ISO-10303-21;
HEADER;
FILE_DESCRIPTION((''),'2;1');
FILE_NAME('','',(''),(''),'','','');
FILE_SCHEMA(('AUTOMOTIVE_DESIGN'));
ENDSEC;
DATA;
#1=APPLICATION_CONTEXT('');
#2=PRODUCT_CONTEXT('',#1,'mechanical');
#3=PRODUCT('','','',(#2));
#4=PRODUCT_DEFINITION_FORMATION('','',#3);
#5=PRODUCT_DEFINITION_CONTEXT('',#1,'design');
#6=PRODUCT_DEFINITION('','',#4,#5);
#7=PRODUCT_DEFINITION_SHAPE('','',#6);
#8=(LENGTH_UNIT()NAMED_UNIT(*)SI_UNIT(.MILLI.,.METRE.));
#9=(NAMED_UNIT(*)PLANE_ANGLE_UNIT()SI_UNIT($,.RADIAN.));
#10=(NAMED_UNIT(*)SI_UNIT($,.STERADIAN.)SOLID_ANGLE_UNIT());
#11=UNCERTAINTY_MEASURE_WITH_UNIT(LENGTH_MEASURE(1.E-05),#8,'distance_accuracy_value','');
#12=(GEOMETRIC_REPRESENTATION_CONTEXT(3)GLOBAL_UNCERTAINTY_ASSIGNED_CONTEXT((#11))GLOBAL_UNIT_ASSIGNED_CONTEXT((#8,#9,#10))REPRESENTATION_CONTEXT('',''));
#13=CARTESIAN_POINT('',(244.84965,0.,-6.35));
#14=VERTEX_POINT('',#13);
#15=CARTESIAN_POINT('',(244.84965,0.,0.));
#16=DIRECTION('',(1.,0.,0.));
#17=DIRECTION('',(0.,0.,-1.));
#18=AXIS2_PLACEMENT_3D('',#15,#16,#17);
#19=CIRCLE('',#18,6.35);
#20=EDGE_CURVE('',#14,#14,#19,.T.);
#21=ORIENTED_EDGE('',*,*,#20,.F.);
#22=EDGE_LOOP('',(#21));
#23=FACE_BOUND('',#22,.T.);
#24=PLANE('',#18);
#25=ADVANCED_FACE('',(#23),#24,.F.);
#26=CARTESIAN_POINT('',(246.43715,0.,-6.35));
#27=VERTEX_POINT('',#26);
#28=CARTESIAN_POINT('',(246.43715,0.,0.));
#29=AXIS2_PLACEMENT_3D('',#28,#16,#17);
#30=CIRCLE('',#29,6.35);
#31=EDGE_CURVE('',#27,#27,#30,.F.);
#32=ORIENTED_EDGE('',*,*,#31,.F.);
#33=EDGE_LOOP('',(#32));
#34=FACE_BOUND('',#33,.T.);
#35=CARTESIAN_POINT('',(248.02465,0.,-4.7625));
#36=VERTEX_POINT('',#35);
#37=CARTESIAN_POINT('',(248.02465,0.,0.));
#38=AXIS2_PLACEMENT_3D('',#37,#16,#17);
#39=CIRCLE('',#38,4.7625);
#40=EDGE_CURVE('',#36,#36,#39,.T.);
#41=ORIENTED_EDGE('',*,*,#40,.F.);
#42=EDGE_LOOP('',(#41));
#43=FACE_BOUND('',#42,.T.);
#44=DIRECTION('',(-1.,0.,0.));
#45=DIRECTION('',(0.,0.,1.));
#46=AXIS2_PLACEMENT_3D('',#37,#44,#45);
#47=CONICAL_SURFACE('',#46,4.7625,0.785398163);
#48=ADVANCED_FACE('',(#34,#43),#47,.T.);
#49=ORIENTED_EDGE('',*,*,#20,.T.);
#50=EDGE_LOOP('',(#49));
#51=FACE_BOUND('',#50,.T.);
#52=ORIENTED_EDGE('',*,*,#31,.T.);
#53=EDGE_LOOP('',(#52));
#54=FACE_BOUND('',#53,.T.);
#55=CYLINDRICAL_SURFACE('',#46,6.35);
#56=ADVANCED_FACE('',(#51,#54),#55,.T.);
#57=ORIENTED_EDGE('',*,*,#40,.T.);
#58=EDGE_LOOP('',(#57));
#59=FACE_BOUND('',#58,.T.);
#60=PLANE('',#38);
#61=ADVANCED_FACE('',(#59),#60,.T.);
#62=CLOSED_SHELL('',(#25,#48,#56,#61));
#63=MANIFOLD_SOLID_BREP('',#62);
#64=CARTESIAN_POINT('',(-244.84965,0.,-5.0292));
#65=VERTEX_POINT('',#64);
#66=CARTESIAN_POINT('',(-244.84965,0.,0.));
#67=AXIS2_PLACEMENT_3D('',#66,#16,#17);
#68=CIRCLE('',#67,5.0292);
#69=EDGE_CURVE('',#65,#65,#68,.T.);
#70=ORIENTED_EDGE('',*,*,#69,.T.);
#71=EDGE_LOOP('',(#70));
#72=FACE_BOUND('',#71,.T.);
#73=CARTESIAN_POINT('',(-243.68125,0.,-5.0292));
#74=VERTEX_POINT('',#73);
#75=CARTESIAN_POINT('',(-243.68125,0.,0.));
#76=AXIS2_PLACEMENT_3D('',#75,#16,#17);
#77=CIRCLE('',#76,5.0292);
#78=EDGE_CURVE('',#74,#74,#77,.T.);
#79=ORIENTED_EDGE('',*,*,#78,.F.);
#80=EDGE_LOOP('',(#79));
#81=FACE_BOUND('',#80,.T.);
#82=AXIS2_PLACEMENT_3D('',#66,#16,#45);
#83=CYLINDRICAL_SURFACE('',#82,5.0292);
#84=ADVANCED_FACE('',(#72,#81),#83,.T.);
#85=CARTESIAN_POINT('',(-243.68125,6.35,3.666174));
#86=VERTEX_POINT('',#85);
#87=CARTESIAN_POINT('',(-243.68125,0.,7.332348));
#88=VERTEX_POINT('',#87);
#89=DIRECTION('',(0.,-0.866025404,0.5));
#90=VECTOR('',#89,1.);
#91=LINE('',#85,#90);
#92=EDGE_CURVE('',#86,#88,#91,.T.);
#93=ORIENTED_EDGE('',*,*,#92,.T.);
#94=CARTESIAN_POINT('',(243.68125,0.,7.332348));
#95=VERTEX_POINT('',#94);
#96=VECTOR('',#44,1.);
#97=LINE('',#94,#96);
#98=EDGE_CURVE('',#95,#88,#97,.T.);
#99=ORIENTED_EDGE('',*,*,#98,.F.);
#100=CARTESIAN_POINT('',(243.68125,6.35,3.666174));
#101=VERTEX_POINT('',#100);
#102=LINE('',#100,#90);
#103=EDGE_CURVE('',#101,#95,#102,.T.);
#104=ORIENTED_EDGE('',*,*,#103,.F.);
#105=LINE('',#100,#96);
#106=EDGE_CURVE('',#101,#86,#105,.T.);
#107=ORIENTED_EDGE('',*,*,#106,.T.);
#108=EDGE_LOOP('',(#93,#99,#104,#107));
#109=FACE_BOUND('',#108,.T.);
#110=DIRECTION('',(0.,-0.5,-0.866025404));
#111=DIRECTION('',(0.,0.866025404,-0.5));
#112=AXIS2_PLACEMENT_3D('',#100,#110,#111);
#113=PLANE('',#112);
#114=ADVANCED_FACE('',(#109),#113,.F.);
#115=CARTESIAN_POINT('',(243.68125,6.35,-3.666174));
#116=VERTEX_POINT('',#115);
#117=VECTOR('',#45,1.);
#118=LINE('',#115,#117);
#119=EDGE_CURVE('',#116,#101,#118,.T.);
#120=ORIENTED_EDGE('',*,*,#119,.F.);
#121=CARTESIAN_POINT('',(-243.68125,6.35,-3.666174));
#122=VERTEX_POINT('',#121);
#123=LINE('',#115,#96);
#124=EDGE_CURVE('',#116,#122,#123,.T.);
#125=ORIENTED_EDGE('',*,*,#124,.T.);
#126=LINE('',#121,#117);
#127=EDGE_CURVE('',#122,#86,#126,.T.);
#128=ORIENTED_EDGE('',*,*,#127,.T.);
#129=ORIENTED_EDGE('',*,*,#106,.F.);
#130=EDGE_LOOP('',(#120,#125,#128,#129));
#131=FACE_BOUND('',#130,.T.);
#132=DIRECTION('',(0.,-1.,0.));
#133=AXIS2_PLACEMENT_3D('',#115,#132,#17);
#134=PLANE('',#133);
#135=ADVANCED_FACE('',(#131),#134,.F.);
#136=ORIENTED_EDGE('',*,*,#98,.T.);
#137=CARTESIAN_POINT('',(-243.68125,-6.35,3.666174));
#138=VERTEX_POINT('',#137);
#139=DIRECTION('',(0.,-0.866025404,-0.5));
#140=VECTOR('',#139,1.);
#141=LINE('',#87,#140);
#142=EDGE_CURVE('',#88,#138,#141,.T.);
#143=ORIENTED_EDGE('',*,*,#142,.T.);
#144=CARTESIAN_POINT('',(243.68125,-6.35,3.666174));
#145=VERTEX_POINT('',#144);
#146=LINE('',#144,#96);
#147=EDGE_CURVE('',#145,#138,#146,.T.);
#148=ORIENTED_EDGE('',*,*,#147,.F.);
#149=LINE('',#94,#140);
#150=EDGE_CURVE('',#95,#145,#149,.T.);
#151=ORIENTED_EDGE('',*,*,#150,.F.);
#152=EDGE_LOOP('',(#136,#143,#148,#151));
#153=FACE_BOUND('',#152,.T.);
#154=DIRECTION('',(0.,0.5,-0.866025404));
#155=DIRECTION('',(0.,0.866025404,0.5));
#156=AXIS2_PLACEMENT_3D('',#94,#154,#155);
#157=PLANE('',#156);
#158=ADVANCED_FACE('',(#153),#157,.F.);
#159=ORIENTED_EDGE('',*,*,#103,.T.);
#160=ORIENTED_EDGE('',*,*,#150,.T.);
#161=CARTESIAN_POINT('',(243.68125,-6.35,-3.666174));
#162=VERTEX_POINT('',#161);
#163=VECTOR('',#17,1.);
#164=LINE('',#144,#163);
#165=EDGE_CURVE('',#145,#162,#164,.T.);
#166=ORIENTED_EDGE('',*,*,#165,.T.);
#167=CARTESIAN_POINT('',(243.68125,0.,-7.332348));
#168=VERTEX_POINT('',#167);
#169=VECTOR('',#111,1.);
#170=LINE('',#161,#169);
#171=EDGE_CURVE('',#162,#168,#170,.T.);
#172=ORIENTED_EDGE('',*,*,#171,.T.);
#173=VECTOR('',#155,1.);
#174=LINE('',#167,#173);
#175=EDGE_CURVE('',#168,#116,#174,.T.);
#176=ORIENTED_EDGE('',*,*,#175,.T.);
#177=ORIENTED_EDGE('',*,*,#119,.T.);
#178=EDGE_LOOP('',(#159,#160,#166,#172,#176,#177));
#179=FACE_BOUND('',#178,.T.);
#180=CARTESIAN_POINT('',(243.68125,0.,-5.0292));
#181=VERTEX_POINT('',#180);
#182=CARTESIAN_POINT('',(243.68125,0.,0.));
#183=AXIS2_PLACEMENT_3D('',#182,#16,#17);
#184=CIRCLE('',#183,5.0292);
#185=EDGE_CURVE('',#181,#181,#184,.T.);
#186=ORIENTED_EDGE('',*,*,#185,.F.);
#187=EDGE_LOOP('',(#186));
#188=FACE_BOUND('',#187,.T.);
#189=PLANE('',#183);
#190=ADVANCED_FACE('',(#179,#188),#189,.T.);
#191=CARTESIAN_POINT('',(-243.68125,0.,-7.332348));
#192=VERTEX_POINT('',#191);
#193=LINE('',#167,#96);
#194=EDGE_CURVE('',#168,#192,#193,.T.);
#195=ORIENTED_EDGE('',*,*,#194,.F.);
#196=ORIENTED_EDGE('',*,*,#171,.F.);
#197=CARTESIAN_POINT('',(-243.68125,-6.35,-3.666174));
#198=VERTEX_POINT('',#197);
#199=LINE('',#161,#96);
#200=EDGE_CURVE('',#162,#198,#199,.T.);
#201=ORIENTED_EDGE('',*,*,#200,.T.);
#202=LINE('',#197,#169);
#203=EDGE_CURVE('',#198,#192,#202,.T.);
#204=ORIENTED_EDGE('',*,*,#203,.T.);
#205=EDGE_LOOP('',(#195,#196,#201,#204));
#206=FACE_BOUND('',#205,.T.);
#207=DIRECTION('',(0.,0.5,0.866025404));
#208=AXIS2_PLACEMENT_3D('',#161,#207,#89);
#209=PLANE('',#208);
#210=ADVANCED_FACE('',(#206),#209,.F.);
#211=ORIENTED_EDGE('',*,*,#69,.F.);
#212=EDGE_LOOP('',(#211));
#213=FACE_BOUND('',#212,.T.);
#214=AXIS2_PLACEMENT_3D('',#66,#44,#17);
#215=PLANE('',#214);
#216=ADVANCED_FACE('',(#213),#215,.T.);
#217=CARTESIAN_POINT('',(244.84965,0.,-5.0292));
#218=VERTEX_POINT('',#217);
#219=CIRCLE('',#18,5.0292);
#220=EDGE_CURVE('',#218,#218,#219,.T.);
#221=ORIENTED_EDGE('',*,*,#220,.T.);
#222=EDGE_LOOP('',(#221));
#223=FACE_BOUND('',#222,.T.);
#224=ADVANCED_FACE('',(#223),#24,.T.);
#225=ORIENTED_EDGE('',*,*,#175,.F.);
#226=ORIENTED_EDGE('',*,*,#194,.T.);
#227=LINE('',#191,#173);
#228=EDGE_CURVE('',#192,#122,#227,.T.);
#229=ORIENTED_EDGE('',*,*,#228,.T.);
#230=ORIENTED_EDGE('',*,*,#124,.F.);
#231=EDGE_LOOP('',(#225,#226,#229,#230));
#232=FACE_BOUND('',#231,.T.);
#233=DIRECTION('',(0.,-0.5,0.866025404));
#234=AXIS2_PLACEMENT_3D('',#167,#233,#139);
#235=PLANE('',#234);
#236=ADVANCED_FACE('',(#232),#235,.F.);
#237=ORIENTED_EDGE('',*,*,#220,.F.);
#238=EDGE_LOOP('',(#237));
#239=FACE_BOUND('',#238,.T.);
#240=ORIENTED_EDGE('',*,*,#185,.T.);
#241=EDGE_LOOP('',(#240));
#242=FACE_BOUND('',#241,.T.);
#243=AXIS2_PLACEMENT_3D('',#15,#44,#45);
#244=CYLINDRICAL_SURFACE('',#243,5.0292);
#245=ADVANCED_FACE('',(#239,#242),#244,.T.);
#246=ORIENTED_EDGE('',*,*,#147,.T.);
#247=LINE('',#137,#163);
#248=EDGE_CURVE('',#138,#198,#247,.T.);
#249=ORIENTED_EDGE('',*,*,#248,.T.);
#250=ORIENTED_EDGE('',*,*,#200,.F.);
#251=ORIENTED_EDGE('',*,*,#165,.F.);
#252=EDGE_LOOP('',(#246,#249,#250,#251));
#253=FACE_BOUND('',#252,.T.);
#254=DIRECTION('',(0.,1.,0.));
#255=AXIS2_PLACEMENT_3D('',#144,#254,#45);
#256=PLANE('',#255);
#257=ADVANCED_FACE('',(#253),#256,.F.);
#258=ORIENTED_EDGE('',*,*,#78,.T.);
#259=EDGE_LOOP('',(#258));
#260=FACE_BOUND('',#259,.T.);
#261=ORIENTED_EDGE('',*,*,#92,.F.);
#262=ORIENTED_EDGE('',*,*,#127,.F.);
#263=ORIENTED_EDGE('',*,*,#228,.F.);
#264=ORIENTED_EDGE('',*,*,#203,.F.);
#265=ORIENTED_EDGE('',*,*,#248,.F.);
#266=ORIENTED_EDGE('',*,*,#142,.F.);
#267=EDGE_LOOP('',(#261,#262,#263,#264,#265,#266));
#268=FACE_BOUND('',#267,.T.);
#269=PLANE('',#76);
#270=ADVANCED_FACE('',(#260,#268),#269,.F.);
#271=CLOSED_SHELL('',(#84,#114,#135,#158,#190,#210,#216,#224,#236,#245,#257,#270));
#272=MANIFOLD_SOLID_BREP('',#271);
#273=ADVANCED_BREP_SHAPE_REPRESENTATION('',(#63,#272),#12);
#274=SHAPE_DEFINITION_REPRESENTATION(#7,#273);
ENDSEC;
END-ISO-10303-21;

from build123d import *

# Parameters (mm, degrees)
BOSS_EXTRUDE1_DEPTH = 243.68125
SKETCH2_R           = 5.0292
BOSS_EXTRUDE2_DEPTH = 1.1684
SKETCH3_R           = 6.35
BOSS_EXTRUDE3_DEPTH = 3.175
CHAMFER1_SIZE       = 1.5875
MIRROR2_START       = -244.84965
MIRROR2_OUTLINE_R   = 5.0292
MIRROR2_DEPTH       = 1.1684


# Read off the part's stored shape, not the designer's step: Mirror2
with BuildPart() as part:
    # Sketch1 → Boss-Extrude1 (new, symmetric)
    with BuildSketch(Plane(origin=(0, 0, 0), x_dir=(0, 0, -1), z_dir=(1, 0, 0))):
        Polygon((-3.666174209, 6.35), (-7.332348419, 0), (-3.666174209, -6.35), (3.666174209, -6.35), (7.332348419, 0), (3.666174209, 6.35), align=None)
    extrude(amount=BOSS_EXTRUDE1_DEPTH, both=True)

    # Sketch2 → Boss-Extrude2 (add)
    with BuildSketch(Plane(origin=(243.68125, 0, 0), x_dir=(0, 0, -1), z_dir=(1, 0, 0))):
        Circle(SKETCH2_R)
    extrude(amount=BOSS_EXTRUDE2_DEPTH)

    # Mirror2 outline → Mirror2 (add)
    with BuildSketch(Plane.YZ.offset(MIRROR2_START)):
        Circle(MIRROR2_OUTLINE_R)
    extrude(amount=MIRROR2_DEPTH)


with BuildPart() as body_2:
    # Sketch3 → Boss-Extrude3 (new body)
    with BuildSketch(Plane(origin=(244.84965, 0, 0), x_dir=(0, 0, -1), z_dir=(1, 0, 0))):
        Circle(SKETCH3_R)
    extrude(amount=BOSS_EXTRUDE3_DEPTH)

    # Chamfer1
    chamfer1_edges = [body_2.edges().sort_by_distance(p)[0] for p in [
        (248.02465, 0, 6.35),
    ]]
    chamfer(chamfer1_edges, length=CHAMFER1_SIZE)


solid = Compound([part.part, body_2.part])
